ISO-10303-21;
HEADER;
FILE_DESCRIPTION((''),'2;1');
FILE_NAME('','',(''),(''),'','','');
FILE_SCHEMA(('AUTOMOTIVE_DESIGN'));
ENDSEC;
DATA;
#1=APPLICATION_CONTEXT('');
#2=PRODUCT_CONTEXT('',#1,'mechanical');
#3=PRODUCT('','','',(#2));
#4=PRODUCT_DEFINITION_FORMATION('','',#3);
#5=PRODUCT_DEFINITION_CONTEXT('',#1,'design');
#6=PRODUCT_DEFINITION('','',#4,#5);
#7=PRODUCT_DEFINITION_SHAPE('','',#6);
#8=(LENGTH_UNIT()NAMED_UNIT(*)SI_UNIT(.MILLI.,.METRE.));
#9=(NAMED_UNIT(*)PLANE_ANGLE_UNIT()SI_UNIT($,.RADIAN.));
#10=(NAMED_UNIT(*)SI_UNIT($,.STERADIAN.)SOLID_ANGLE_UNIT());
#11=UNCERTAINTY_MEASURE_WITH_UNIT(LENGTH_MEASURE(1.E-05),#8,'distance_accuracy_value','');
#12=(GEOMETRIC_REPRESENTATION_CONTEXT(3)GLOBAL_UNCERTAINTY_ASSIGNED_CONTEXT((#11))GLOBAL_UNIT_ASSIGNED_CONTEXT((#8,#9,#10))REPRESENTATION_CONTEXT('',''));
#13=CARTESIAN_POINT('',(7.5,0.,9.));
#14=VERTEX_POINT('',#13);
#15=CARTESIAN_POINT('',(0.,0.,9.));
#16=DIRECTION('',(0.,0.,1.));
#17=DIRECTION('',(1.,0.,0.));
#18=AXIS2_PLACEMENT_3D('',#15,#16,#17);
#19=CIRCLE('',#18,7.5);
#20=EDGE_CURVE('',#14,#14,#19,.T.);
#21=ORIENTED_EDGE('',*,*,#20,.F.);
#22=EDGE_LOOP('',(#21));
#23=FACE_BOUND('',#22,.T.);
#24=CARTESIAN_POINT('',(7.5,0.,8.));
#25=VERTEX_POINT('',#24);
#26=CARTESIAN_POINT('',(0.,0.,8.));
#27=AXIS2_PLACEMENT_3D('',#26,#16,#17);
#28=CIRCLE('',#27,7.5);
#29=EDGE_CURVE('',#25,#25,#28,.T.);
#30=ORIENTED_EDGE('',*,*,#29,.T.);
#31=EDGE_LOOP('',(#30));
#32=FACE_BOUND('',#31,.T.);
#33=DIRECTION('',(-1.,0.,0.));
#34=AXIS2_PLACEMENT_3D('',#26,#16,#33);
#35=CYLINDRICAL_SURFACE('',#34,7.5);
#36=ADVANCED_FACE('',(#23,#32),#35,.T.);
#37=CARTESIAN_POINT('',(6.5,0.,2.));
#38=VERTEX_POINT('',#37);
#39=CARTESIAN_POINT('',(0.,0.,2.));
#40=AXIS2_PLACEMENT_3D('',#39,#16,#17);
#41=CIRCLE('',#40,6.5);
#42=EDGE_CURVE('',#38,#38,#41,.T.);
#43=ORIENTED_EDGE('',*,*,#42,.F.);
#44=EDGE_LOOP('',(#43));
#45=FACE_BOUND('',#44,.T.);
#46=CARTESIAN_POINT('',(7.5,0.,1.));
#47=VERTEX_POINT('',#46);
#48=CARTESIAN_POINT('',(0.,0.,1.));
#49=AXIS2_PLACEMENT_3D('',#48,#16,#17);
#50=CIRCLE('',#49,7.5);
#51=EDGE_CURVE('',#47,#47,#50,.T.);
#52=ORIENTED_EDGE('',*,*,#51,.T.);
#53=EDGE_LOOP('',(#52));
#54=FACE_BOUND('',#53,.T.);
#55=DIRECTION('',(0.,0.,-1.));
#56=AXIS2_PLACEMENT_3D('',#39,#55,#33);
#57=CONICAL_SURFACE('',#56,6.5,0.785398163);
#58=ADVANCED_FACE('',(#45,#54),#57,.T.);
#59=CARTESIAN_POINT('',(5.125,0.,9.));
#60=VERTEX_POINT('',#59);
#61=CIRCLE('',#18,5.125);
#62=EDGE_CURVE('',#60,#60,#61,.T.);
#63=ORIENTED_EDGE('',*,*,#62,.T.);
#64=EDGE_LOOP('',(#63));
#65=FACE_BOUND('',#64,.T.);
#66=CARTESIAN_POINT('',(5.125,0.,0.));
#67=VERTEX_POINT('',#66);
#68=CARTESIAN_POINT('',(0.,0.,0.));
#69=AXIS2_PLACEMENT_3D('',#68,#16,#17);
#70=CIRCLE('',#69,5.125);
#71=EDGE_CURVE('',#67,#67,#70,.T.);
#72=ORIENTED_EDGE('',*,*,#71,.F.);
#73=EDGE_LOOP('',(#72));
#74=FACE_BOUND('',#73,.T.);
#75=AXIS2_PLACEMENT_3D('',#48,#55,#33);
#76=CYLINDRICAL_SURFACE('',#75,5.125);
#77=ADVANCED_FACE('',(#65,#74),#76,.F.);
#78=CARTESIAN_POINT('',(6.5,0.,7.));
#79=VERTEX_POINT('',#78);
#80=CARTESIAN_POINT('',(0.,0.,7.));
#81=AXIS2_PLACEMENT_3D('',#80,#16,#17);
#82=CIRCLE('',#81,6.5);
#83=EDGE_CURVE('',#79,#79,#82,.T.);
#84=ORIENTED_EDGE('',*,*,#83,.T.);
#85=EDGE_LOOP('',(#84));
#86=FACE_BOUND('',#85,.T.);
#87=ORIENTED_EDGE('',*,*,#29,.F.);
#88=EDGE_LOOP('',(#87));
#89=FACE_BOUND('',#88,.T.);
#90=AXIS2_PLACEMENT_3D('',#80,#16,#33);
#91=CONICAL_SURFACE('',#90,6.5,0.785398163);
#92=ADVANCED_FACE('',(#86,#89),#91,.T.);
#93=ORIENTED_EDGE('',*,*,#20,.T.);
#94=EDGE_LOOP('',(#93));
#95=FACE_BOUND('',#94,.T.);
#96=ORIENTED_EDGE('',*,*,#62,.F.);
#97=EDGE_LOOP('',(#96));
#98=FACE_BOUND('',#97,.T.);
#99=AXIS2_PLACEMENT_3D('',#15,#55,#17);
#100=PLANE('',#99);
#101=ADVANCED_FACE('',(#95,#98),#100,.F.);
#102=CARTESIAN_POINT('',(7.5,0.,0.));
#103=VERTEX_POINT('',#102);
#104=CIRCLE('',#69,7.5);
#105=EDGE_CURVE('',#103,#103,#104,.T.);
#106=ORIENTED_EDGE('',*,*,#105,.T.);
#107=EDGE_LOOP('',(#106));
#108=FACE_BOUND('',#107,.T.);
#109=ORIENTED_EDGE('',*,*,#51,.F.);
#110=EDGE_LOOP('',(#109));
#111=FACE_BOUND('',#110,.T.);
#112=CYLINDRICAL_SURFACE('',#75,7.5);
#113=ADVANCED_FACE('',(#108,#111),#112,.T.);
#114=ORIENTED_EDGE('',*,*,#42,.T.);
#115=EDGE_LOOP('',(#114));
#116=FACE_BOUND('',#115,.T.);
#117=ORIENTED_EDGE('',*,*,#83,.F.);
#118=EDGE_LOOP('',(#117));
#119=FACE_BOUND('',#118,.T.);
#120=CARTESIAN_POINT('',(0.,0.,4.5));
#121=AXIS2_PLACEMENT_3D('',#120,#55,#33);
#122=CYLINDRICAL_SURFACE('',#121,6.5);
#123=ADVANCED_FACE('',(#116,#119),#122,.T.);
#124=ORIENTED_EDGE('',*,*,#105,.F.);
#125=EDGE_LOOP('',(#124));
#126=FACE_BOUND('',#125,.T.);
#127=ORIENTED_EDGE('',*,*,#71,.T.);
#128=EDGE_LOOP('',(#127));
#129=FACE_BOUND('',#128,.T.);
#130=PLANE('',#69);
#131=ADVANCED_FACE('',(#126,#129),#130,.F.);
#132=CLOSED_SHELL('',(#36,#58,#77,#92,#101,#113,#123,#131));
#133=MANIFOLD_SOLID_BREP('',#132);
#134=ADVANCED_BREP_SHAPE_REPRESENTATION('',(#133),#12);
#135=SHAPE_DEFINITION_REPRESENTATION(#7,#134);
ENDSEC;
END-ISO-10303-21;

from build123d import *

# Parameters (mm, degrees)
SKETCH1_R           = 7.5
SKETCH1_R_2         = 5.125
BOSS_EXTRUDE1_DEPTH = 1
SKETCH2_R           = 6.5
SKETCH2_R_2         = 5.125
BOSS_EXTRUDE2_DEPTH = 3.5
CHAMFER1_SIZE       = 1


with BuildPart() as part:
    # Sketch1 → Boss-Extrude1 (new body)
    with BuildSketch(Plane.XY):
        Circle(SKETCH1_R)
        Circle(SKETCH1_R_2, mode=Mode.SUBTRACT)
    extrude(amount=BOSS_EXTRUDE1_DEPTH)

    # Sketch2 → Boss-Extrude2 (add)
    with BuildSketch(Plane.XY.offset(1)):
        Circle(SKETCH2_R)
        Circle(SKETCH2_R_2, mode=Mode.SUBTRACT)
    extrude(amount=BOSS_EXTRUDE2_DEPTH)

    # Chamfer1
    chamfer1_edges = [part.edges().sort_by_distance(p)[0] for p in [
        (-6.5, 0, 1),
    ]]
    chamfer(chamfer1_edges, length=CHAMFER1_SIZE - 0.0001)  # a hair under: the kernel refuses the full size

    # Mirror5: part across plane


with BuildPart() as part_1:
    add(part.part)
    add(part.part.mirror(Plane.XY.offset(4.5)))


solid = part_1.part
